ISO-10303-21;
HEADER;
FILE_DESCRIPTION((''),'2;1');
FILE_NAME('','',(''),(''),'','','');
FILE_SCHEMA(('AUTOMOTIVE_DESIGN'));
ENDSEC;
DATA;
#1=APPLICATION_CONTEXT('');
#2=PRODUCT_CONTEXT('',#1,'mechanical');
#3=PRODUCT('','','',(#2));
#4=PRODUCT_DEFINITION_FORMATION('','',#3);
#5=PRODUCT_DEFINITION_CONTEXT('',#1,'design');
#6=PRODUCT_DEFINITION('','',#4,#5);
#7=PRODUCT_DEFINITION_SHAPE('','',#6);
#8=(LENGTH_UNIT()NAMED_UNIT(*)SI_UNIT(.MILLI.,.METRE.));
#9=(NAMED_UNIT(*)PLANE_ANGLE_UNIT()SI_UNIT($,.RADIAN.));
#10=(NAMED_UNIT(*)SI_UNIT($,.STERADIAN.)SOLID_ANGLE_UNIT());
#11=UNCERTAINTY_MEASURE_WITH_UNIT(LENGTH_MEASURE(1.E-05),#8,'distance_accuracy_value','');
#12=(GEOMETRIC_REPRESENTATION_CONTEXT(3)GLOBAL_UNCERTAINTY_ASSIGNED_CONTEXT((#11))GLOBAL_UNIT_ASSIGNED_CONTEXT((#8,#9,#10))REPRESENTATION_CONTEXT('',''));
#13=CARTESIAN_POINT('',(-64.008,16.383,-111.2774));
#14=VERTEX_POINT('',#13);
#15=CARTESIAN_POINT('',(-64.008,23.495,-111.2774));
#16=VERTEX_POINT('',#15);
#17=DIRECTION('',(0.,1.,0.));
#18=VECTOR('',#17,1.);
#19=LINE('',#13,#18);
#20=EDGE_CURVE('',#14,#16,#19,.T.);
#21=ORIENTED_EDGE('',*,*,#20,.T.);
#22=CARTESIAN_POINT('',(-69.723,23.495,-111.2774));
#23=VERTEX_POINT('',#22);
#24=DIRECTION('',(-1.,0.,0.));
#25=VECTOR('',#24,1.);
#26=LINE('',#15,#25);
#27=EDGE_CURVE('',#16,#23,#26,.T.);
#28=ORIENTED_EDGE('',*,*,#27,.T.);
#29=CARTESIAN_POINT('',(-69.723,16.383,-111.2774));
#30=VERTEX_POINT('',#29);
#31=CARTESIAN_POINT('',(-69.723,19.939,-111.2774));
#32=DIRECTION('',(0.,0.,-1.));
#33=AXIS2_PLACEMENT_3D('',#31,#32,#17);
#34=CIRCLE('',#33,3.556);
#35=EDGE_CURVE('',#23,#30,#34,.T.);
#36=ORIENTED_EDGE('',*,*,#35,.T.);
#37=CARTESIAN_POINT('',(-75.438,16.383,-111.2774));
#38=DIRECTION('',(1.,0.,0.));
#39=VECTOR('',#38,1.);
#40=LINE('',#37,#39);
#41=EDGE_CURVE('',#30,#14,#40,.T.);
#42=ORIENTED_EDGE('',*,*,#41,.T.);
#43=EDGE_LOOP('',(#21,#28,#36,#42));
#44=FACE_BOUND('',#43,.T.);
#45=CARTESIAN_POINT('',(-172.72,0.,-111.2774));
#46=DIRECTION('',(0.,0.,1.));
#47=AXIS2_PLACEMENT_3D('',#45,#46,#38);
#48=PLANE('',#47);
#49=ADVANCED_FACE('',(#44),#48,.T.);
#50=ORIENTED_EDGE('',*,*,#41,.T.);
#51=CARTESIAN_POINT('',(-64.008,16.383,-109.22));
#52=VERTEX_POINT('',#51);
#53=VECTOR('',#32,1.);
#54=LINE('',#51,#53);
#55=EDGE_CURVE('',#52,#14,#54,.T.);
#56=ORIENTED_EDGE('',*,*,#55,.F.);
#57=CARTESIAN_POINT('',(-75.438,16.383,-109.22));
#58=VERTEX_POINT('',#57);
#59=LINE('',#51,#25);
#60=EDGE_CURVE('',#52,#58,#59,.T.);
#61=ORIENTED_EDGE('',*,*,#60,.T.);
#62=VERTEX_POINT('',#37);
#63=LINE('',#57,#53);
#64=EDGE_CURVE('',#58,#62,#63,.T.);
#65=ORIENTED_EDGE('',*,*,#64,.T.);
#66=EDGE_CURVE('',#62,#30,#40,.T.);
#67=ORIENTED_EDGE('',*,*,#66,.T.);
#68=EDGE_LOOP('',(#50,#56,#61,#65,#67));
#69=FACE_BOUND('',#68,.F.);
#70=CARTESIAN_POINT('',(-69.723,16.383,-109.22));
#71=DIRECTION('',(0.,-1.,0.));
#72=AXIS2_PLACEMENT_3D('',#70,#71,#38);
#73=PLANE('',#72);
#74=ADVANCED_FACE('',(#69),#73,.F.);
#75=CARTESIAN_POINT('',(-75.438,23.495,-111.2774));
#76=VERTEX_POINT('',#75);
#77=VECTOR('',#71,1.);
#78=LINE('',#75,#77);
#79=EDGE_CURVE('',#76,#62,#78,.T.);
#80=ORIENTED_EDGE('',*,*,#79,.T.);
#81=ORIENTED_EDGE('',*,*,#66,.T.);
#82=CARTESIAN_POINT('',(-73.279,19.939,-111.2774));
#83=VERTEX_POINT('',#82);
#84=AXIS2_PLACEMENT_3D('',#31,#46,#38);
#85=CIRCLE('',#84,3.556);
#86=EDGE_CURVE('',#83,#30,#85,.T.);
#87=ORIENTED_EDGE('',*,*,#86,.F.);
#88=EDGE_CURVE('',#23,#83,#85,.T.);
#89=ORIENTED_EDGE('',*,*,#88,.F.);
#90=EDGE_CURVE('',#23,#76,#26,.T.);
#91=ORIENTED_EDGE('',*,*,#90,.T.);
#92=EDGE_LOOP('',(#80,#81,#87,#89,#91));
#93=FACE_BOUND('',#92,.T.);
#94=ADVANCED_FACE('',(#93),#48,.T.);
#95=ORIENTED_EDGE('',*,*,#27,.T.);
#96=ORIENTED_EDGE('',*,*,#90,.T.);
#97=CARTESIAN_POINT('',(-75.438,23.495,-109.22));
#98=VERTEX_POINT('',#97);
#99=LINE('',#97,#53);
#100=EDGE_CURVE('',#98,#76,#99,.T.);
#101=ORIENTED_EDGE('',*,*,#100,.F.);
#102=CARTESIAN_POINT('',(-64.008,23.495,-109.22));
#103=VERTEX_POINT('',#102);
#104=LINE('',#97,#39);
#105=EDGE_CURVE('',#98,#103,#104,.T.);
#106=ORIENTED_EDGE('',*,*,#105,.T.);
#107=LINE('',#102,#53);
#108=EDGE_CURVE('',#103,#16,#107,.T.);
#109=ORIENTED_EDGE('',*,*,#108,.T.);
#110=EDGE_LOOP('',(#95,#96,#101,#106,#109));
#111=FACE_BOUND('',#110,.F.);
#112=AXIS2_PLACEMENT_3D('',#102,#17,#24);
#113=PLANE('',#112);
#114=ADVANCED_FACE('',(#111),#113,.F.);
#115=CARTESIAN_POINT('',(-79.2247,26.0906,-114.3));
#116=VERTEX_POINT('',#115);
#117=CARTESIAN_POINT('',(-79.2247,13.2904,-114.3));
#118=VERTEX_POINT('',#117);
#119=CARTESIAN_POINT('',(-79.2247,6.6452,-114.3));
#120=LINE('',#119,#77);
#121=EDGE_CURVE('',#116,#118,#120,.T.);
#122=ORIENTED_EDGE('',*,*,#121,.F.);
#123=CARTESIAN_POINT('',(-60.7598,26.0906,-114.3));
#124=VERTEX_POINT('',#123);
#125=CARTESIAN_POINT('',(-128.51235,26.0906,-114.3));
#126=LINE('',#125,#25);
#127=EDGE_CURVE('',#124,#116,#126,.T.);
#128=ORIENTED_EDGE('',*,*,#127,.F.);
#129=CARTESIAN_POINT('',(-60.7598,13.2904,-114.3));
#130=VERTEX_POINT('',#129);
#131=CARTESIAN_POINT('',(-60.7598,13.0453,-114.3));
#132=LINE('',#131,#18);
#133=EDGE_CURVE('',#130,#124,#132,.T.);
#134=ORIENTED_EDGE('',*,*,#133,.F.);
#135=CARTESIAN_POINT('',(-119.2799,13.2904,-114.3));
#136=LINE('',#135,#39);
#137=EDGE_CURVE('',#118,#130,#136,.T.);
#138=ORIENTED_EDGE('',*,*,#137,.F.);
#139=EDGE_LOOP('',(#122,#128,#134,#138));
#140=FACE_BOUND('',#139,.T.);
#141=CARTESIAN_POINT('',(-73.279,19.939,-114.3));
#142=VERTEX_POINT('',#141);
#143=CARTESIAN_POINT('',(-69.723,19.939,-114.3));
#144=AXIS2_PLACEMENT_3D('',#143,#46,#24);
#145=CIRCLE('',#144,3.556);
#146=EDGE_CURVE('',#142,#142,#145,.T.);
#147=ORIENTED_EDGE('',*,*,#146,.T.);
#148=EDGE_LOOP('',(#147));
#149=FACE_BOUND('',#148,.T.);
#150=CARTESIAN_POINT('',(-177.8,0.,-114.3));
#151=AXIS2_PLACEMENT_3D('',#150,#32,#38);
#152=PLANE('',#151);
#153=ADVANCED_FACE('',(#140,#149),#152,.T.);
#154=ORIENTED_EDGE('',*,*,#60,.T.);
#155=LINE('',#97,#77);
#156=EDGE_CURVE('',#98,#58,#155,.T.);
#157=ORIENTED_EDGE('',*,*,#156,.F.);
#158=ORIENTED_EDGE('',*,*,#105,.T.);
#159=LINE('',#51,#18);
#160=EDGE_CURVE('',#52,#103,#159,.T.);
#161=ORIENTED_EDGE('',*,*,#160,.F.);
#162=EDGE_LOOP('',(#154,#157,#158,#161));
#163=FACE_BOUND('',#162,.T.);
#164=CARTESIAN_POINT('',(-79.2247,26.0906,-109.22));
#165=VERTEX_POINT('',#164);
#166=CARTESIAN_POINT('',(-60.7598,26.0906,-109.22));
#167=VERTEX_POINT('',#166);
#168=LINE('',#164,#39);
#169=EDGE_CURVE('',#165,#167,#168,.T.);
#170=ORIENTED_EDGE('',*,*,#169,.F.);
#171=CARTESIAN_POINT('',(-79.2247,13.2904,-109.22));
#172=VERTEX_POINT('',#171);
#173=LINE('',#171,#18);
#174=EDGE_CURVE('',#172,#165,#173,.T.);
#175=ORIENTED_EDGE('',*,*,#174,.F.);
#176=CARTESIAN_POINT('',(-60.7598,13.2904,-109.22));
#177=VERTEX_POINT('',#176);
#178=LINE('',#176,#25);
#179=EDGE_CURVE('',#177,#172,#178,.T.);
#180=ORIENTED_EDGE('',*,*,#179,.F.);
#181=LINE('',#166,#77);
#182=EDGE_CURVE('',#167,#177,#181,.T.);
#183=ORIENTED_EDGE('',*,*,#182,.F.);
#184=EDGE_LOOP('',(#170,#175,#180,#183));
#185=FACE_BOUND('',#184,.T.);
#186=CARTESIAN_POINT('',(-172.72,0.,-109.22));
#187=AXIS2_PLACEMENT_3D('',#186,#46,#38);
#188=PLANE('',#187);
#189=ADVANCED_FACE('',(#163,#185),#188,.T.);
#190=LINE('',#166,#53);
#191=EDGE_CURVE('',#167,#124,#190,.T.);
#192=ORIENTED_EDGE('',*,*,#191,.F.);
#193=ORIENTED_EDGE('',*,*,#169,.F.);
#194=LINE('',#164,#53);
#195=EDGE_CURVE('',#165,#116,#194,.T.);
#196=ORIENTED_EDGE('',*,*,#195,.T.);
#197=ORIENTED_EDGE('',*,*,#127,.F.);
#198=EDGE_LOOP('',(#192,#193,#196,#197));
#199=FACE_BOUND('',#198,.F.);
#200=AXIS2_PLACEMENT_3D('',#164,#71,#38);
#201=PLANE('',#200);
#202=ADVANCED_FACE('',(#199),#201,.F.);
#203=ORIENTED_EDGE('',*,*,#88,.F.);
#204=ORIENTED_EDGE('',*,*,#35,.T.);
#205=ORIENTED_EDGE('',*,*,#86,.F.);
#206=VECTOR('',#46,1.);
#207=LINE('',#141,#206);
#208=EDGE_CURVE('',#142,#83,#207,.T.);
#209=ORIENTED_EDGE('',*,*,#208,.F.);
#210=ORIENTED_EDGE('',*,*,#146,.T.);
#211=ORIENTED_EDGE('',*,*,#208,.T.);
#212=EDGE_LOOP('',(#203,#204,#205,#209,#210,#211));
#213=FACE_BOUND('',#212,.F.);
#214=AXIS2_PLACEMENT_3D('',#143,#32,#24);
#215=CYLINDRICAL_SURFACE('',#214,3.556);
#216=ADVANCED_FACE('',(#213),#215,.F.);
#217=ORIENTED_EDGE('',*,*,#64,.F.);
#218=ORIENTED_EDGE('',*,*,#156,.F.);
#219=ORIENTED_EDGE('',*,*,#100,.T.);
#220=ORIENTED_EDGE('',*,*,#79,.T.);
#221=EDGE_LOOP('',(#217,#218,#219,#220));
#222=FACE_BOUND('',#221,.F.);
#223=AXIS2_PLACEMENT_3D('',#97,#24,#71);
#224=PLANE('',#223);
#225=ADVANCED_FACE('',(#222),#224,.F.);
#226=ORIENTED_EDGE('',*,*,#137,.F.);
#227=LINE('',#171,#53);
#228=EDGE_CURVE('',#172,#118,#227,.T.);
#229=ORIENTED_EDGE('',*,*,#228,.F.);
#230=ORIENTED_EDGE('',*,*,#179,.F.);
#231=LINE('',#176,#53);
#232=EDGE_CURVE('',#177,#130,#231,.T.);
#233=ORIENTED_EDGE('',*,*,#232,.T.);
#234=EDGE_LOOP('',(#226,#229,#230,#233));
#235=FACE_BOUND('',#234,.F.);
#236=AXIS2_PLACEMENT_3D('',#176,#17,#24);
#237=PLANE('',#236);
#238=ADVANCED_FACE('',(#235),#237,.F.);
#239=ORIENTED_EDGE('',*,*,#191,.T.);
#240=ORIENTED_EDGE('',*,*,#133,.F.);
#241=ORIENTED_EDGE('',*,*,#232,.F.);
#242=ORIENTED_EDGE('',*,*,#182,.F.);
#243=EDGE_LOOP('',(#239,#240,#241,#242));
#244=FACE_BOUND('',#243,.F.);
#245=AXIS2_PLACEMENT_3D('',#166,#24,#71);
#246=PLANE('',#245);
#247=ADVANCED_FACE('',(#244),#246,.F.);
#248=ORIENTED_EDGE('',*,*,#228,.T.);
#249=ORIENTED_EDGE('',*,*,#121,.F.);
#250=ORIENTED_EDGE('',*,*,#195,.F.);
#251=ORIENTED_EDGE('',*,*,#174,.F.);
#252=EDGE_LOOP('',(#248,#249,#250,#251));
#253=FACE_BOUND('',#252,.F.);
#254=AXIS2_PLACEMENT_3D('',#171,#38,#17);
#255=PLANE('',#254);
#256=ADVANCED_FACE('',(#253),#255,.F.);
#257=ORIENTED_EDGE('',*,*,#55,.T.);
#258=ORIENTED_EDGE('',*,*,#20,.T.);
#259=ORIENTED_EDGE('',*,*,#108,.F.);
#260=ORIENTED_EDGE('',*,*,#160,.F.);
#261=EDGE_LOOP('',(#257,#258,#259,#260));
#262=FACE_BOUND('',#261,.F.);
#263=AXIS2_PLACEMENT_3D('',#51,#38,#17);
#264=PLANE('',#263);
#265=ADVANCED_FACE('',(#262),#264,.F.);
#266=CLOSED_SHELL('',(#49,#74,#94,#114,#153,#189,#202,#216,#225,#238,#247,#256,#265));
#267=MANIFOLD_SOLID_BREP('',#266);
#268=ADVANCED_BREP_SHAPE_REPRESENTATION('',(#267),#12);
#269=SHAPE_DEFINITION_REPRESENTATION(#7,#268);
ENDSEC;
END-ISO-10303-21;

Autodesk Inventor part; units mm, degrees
ref_plane "YZ Plane" through (0, 0, 0) normal (1, 0, 0) x (0, 1, 0)
ref_plane "XZ Plane" through (0, 0, 0) normal (0, 1, 0) x (-1, 0, 0)
ref_plane "XY Plane" through (0, 0, 0) normal (0, 0, 1) x (1, 0, 0)
sketch "Sketch1" plane through (0, 0, 0) normal (0, 1, 0) x (-1, 0, 0)
  line L0 (0, 0) -> (177.8, 0)
  line L1 (177.8, 0) -> (177.8, -114.3)
  line L2 (177.8, -114.3) -> (0, -114.3)
  line L3 (0, -114.3) -> (0, 0)
  dimension "d0" = 177.8
  dimension "d1" = 114.3
extrude "Extrusion1" add sketch "Sketch1" along normal blind 38.1
sketch "Sketch2" plane through (0, 0, 0) normal (0, -1, 0) x (1, 0, 0)
  line L0 (-177.8, -114.3) -> (-177.8, 0) projected
  line L1 (0, 0) -> (-177.8, 0)
  line L2 (-177.8, 0) -> (-177.8, -114.3)
  line L3 (-177.8, -114.3) -> (0, -114.3)
  line L4 (0, -114.3) -> (0, 0)
  line L5 (-5.08, -5.08) -> (-172.72, -5.08)
  line L6 (-172.72, -5.08) -> (-172.72, -109.22)
  line L7 (-172.72, -109.22) -> (-5.08, -109.22)
  line L8 (-5.08, -109.22) -> (-5.08, -5.08)
  dimension "d4" = 5.08
extrude "Extrusion2" cut sketch "Sketch2" against normal blind 35.56 contours L8 L7 L6 L5
fillet "Fillet1" radius 3.175 4 edges at (-177.8, 38.1, -57.15) (-88.9, 38.1, 0) (-88.9, 38.1, -114.3) (0, 38.1, -57.15)
sketch "Sketch3" plane through (0, 38.1, 0) normal (0, 1, 0) x (1, 0, 0)
  line L0 (-177.8, 114.3) -> (-171.45, 114.3)
  line L1 (-171.45, 114.3) -> (-171.45, 0)
  line L2 (-171.45, 0) -> (-177.8, 0)
  line L3 (-177.8, 0) -> (-177.8, 114.3)
  line L4 (0, 114.3) -> (-177.8, 114.3) projected
  line L5 (-177.8, 114.3) -> (0, 114.3)
  line L6 (0, 114.3) -> (0, 107.95)
  line L7 (0, 107.95) -> (-177.8, 107.95)
  line L8 (-177.8, 107.95) -> (-177.8, 114.3)
  line L9 (-158.75, 100.4887) -> (-100.6475, 100.4887)
  line L10 (-100.6475, 100.4887) -> (-100.6475, 13.8112)
  line L11 (-100.6475, 13.8112) -> (-158.75, 13.8112)
  line L12 (-158.75, 13.8112) -> (-158.75, 100.4887)
  point P0 (0, 0)
  dimension "d8" = 6.35
  dimension "d9" = 6.35
  dimension "d10" = 58.1025
  dimension "d11" = 86.6775
  dimension "d12" = 13.8112
  dimension "d13" = 19.05
extrude "Extrusion3" cut sketch "Sketch3" against normal blind 35.56 contours L9 L10 L11 L12
sketch "Sketch4" plane through (0, 38.1, 0) normal (0, 1, 0) x (1, 0, 0)
  line L0 (-94.2975, 17.78) -> (-81.2088, 17.78)
  line L1 (-91.7575, 20.32) -> (-91.7575, 26.67)
  line L2 (-91.7575, 26.67) -> (-94.2975, 26.67)
  line L3 (-94.2975, 26.67) -> (-94.2975, 17.78)
  line L4 (-94.2975, 17.78) -> (-78.6765, 17.78)
  line L5 (-78.6765, 17.78) -> (-78.6765, 20.32)
  line L6 (-94.2975, 24.2647) -> (-94.2975, 17.78)
  line L7 (-85.6615, 20.32) -> (-85.6615, 24.13)
  line L8 (-85.6615, 24.13) -> (-88.2015, 24.13)
  line L9 (-88.2015, 24.13) -> (-88.2015, 20.32)
  line L10 (-78.6765, 20.32) -> (-85.6615, 20.32)
  line L11 (-88.2015, 20.32) -> (-91.7575, 20.32)
  line L12 (-100.6475, 100.4887) -> (-100.6475, 13.8112) projected
  line L13 (-177.8, 0) -> (0, 0) projected
  line L14 (-94.2975, 27.94) -> (-78.6765, 27.94)
  line L15 (-78.6765, 27.94) -> (-78.6765, 30.7699)
  line L16 (-81.2165, 30.48) -> (-94.2975, 30.48)
  line L17 (-94.2975, 30.48) -> (-94.2975, 27.94)
  line L18 (-83.0828, 27.94) -> (-78.6765, 27.94)
  line L19 (-78.6765, 27.94) -> (-78.6765, 36.83)
  line L20 (-78.6765, 36.83) -> (-81.2165, 36.83)
  line L21 (-81.2165, 36.83) -> (-81.2165, 30.48)
  ellipse E0 centre (-86.487, 41.91) end of major axis (-94.2975, 41.91) minor radius 5.334
  ellipse E1 centre (-86.487, 53.34) end of major axis (-94.2975, 53.34) minor radius 5.334
  line L22 (-94.2975, 60.96) -> (-78.6765, 60.96)
  line L23 (-78.6765, 60.96) -> (-78.6765, 63.754)
  line L24 (-94.2975, 63.754) -> (-94.2975, 60.96)
  ellipse E2 centre (-86.487, 63.754) end of major axis (-94.2975, 63.754) minor radius 7.62 (-78.6765, 63.754) -> (-94.2975, 63.754) ccw
  line L25 (-91.7575, 63.754) -> (-91.7575, 63.5)
  line L26 (-91.7575, 63.5) -> (-81.2165, 63.5)
  line L27 (-81.2165, 63.5) -> (-81.2165, 63.754)
  line L28 (-94.2975, 82.55) -> (-78.6765, 82.55)
  line L29 (-78.6765, 82.55) -> (-78.6765, 80.01)
  line L30 (-78.6765, 80.01) -> (-94.2975, 80.01)
  line L31 (-94.2975, 80.01) -> (-94.2975, 82.55)
  line L32 (-91.7575, 89.535) -> (-78.6765, 89.535)
  line L33 (-78.6765, 89.535) -> (-78.6765, 92.075)
  line L34 (-78.6765, 92.075) -> (-91.7575, 92.075)
  line L35 (-94.2975, 94.8241) -> (-94.2975, 91.9305)
  line L36 (-94.2975, 85.09) -> (-91.7575, 85.09)
  line L37 (-91.7575, 96.52) -> (-94.2975, 96.52)
  line L38 (-94.2975, 96.52) -> (-94.2975, 85.09)
  line L39 (-91.7575, 85.09) -> (-91.7575, 89.535)
  line L40 (-91.7575, 92.075) -> (-91.7575, 96.52)
  spline S0 degree 5 poles (-91.7575, 41.91) (-91.7584, 41.6813) (-91.6944, 41.4527) (-91.5885, 41.2473) (-91.2042, 40.6846) (-90.6636, 40.2564) (-90.282, 40.0177) (-89.3306, 39.5478) (-88.3046, 39.2718) (-87.7026, 39.1679) (-86.487, 39.0641) (-85.2714, 39.1679) (-84.6694, 39.2718) (-83.6435, 39.5478) (-82.692, 40.0176) (-82.3107, 40.2563) (-81.7696, 40.6845) (-81.3858, 41.2473) (-81.2787, 41.4526) (-81.1539, 41.91) (-81.2787, 42.3674) (-81.3858, 42.5727) (-81.7696, 43.1355) (-82.3107, 43.5637) (-82.692, 43.8024) (-83.6435, 44.2722) (-84.6694, 44.5482) (-85.2714, 44.6521) (-86.487, 44.7559) (-87.7026, 44.6521) (-88.3046, 44.5482) (-89.3306, 44.2722) (-90.282, 43.8023) (-90.6636, 43.5636) (-91.2042, 43.1354) (-91.5885, 42.5727) (-91.6944, 42.3673) (-91.7584, 42.1387) (-91.7575, 41.91) knots 0 0 0 0 0 0 0.044471 0.044471 0.044471 0.131758 0.131758 0.131758 0.25 0.25 0.25 0.36824 0.36824 0.36824 0.455522 0.455522 0.455522 0.5 0.5 0.5 0.544478 0.544478 0.544478 0.63176 0.63176 0.63176 0.75 0.75 0.75 0.868242 0.868242 0.868242 0.955529 0.955529 0.955529 1 1 1 1 1 1
  spline S1 degree 5 poles (-91.7575, 53.34) (-91.7584, 53.1113) (-91.6944, 52.8827) (-91.5885, 52.6773) (-91.2042, 52.1146) (-90.6636, 51.6864) (-90.282, 51.4477) (-89.3306, 50.9778) (-88.3046, 50.7018) (-87.7026, 50.5979) (-86.487, 50.4941) (-85.2714, 50.5979) (-84.6694, 50.7018) (-83.6435, 50.9778) (-82.692, 51.4476) (-82.3107, 51.6863) (-81.7696, 52.1145) (-81.3858, 52.6773) (-81.2787, 52.8826) (-81.1539, 53.34) (-81.2787, 53.7974) (-81.3858, 54.0027) (-81.7696, 54.5655) (-82.3107, 54.9937) (-82.692, 55.2324) (-83.6435, 55.7022) (-84.6694, 55.9782) (-85.2714, 56.0821) (-86.487, 56.1859) (-87.7026, 56.0821) (-88.3046, 55.9782) (-89.3306, 55.7022) (-90.282, 55.2323) (-90.6636, 54.9936) (-91.2042, 54.5654) (-91.5885, 54.0027) (-91.6944, 53.7973) (-91.7584, 53.5687) (-91.7575, 53.34) knots 0 0 0 0 0 0 0.044471 0.044471 0.044471 0.131758 0.131758 0.131758 0.25 0.25 0.25 0.36824 0.36824 0.36824 0.455522 0.455522 0.455522 0.5 0.5 0.5 0.544478 0.544478 0.544478 0.63176 0.63176 0.63176 0.75 0.75 0.75 0.868242 0.868242 0.868242 0.955529 0.955529 0.955529 1 1 1 1 1 1
  spline S2 degree 5 poles (-81.2165, 63.754) (-81.2166, 64.309) (-81.2953, 64.8639) (-81.4525, 65.404) (-82.1282, 66.8995) (-83.3585, 68.0474) (-84.3453, 68.5716) (-86.487, 69.0964) (-88.6287, 68.5716) (-89.6155, 68.0474) (-90.8458, 66.8995) (-91.5215, 65.404) (-91.6787, 64.8639) (-91.7574, 64.309) (-91.7575, 63.754) knots 0 0 0 0 0 0 0.170659 0.170659 0.170659 0.5 0.5 0.5 0.829341 0.829341 0.829341 1 1 1 1 1 1
  point P0 (-94.2975, 93.3773)
  point P1 (-88.9, 0)
  point P2 (-93.0275, 85.09)
  dimension "d32" = 5.334
  dimension "d33" = 7.8105
  dimension "d36" = 7.8105
  dimension "d37" = 5.334
  dimension "d42" = 7.62
  dimension "d43" = 2.54
  dimension "d16" = 2.54
  dimension "d17" = 3.556
  dimension "d18" = 2.54
  dimension "d19" = 6.985
  dimension "d20" = 8.89
  dimension "d21" = 6.35
  dimension "d22" = 3.81
  dimension "d23" = 3.81
  dimension "d24" = 6.35
  dimension "d25" = 17.78
  dimension "d26" = 2.54
  dimension "d27" = 2.54
  dimension "d28" = 6.35
  dimension "d29" = 15.621
  dimension "d30" = 6.35
  dimension "d31" = 27.94
  dimension "d34" = 14.1605
  dimension "d35" = 41.91
  dimension "d38" = 14.1605
  dimension "d39" = 53.34
  dimension "d40" = 2.54
  dimension "d41" = 2.54
  dimension "d44" = 6.35
  dimension "d45" = 15.621
  dimension "d46" = 60.96
  dimension "d47" = 2.794
  dimension "d48" = 63.754
  dimension "d49" = 14.1605
  dimension "d50" = 2.54
  dimension "d51" = 15.621
  dimension "d52" = 4.445
  dimension "d53" = 4.445
  dimension "d54" = 2.54
  dimension "d55" = 2.54
  dimension "d56" = 6.35
  dimension "d57" = 80.01
  dimension "d58" = 2.54
  dimension "d59" = 13.081
  dimension "d62" = 3.9688
  dimension "d63" = 3.9688
extrude "Extrusion4" cut sketch "Sketch4" against normal blind 1.27
sketch "Sketch5" plane through (0, 38.1, 0) normal (0, 1, 0) x (1, 0, 0)
  line L0 (-43.4975, 22.6219) -> (-37.9413, 22.6219)
  line L1 (-37.9413, 22.6219) -> (-37.9413, 28.1781)
  line L2 (-37.9413, 28.1781) -> (-43.4975, 28.1781)
  line L3 (-43.4975, 28.1781) -> (-43.4975, 22.6219)
  line L4 (-43.4975, 38.4969) -> (-37.9413, 38.4969)
  line L5 (-37.9413, 38.4969) -> (-37.9413, 44.0531)
  line L6 (-37.9413, 44.0531) -> (-43.4975, 44.0531)
  line L7 (-43.4975, 44.0531) -> (-43.4975, 38.4969)
  line L8 (-43.4975, 54.3719) -> (-37.9413, 54.3719)
  line L9 (-37.9413, 54.3719) -> (-37.9413, 59.9281)
  line L10 (-37.9413, 59.9281) -> (-43.4975, 59.9281)
  line L11 (-43.4975, 59.9281) -> (-43.4975, 54.3719)
  line L12 (-43.4975, 70.2469) -> (-37.9413, 70.2469)
  line L13 (-37.9413, 70.2469) -> (-37.9413, 75.8031)
  line L14 (-37.9413, 75.8031) -> (-43.4975, 75.8031)
  line L15 (-43.4975, 75.8031) -> (-43.4975, 70.2469)
  line L16 (-43.4975, 86.1219) -> (-37.9413, 86.1219)
  line L17 (-37.9413, 86.1219) -> (-37.9413, 91.6781)
  line L18 (-37.9413, 91.6781) -> (-43.4975, 91.6781)
  line L19 (-43.4975, 91.6781) -> (-43.4975, 86.1219)
  line L20 (0, 114.3) -> (-177.8, 114.3) projected
  line L21 (-177.8, 0) -> (0, 0) projected
  line L22 (-100.6475, 100.4887) -> (-100.6475, 13.8112) projected
  circle A0 centre (-21.9075, 25.4) radius 3.81
  circle A1 centre (-21.9075, 41.275) radius 3.81
  circle A2 centre (-21.9075, 57.15) radius 3.81
  circle A3 centre (-21.9075, 73.025) radius 3.81
  circle A4 centre (-21.9075, 88.9) radius 3.81
  point P0 (-43.4975, 73.025)
  dimension "d64" = 5.5563
  dimension "d65" = 5.5563
  dimension "d66" = 5.5563
  dimension "d67" = 5.5563
  dimension "d68" = 5.5563
  dimension "d69" = 5.5563
  dimension "d70" = 15.875
  dimension "d71" = 15.875
  dimension "d72" = 15.875
  dimension "d73" = 15.875
  dimension "d74" = 22.6219
  dimension "d76" = 57.15
  dimension "d77" = 7.62
  dimension "d78" = 7.62
  dimension "d79" = 7.62
  dimension "d80" = 7.62
  dimension "d81" = 7.62
  dimension "d82" = 15.875
  dimension "d83" = 15.875
  dimension "d84" = 15.875
  dimension "d85" = 15.875
  dimension "d86" = 25.4
  dimension "d87" = 78.74
  dimension "d88" = 78.74
  dimension "d89" = 78.74
  dimension "d90" = 78.74
  dimension "d91" = 78.74
extrude "Extrusion5" cut sketch "Sketch5" against normal blind 25.4
sketch "Sketch6" plane through (0, 35.56, 0) normal (0, -1, 0) x (1, 0, 0)
  circle A0 centre (-21.9075, -88.9) radius 3.81 projected
  circle A1 centre (-21.9075, -88.9) radius 5.08
  circle A2 centre (-21.9075, -73.025) radius 3.81 projected
  circle A3 centre (-21.9075, -73.025) radius 5.08
  circle A4 centre (-21.9075, -57.15) radius 3.81 projected
  circle A5 centre (-21.9075, -57.15) radius 5.08
  circle A6 centre (-21.9075, -41.275) radius 3.81 projected
  circle A7 centre (-21.9075, -41.275) radius 5.08
  circle A8 centre (-21.9075, -25.4) radius 3.81 projected
  circle A9 centre (-21.9075, -25.4) radius 5.08
  line L0 (-43.4975, -59.9281) -> (-37.9413, -59.9281)
  line L1 (-37.9413, -59.9281) -> (-37.9413, -54.3719)
  line L2 (-37.9413, -54.3719) -> (-43.4975, -54.3719)
  line L3 (-43.4975, -54.3719) -> (-43.4975, -59.9281)
  line L4 (-45.4025, -61.8331) -> (-36.0363, -61.8331)
  line L5 (-36.0363, -61.8331) -> (-36.0363, -52.4669)
  line L6 (-36.0363, -52.4669) -> (-45.4025, -52.4669)
  line L7 (-45.4025, -52.4669) -> (-45.4025, -61.8331)
  line L8 (-43.4975, -91.6781) -> (-37.9413, -91.6781)
  line L9 (-37.9413, -91.6781) -> (-37.9413, -86.1219)
  line L10 (-37.9413, -86.1219) -> (-43.4975, -86.1219)
  line L11 (-43.4975, -86.1219) -> (-43.4975, -91.6781)
  line L12 (-43.4975, -75.8031) -> (-37.9413, -75.8031) projected
  line L13 (-37.9413, -70.2469) -> (-36.6713, -68.9769) projected
  line L14 (-43.4975, -75.8031) -> (-37.9413, -75.8031)
  line L15 (-37.9413, -75.8031) -> (-37.9413, -70.2469)
  line L16 (-37.9413, -70.2469) -> (-43.4975, -70.2469)
  line L17 (-43.4975, -70.2469) -> (-43.4975, -75.8031)
  line L18 (-43.4975, -38.4969) -> (-43.4975, -44.0531) projected
  line L19 (-43.4975, -44.0531) -> (-37.9413, -44.0531)
  line L20 (-37.9413, -44.0531) -> (-37.9413, -38.4969)
  line L21 (-37.9413, -38.4969) -> (-43.4975, -38.4969)
  line L22 (-43.4975, -38.4969) -> (-43.4975, -44.0531)
  line L23 (-37.9413, -28.1781) -> (-43.4975, -28.1781) projected
  line L24 (-37.9413, -22.6219) -> (-36.6713, -21.3519) projected
  line L25 (-43.4975, -28.1781) -> (-37.9413, -28.1781)
  line L26 (-37.9413, -28.1781) -> (-37.9413, -22.6219)
  line L27 (-37.9413, -22.6219) -> (-43.4975, -22.6219)
  line L28 (-43.4975, -22.6219) -> (-43.4975, -28.1781)
  line L29 (-45.4025, -77.7081) -> (-36.0363, -77.7081)
  line L30 (-36.0363, -77.7081) -> (-36.0363, -68.3419)
  line L31 (-36.0363, -68.3419) -> (-45.4025, -68.3419)
  line L32 (-45.4025, -68.3419) -> (-45.4025, -77.7081)
  line L33 (-45.4025, -84.2169) -> (-36.0362, -84.2169)
  line L34 (-36.0362, -84.2169) -> (-36.0362, -93.5831)
  line L35 (-36.0362, -93.5831) -> (-45.4025, -93.5831)
  line L36 (-45.4025, -93.5831) -> (-45.4025, -84.2169)
  line L37 (-36.0362, -45.9581) -> (-45.4025, -45.9581)
  line L38 (-45.4025, -45.9581) -> (-45.4025, -36.5919)
  line L39 (-45.4025, -36.5919) -> (-36.0362, -36.5919)
  line L40 (-36.0362, -36.5919) -> (-36.0362, -45.9581)
  line L41 (-45.4025, -30.0831) -> (-36.0363, -30.0831)
  line L42 (-36.0363, -30.0831) -> (-36.0363, -20.7169)
  line L43 (-36.0363, -20.7169) -> (-45.4025, -20.7169)
  line L44 (-45.4025, -20.7169) -> (-45.4025, -30.0831)
  line L45 (-48.3394, -99.6918) -> (-33.0994, -99.6918)
  line L46 (-33.0994, -99.6918) -> (-33.0994, -14.6018)
  line L47 (-33.0994, -14.6018) -> (-48.3394, -14.6018)
  line L48 (-48.3394, -14.6018) -> (-48.3394, -99.6918)
  point P0 (0, 0)
  point P1 (-43.4975, -38.4969)
  point P2 (-40.7194, -44.0531)
  point P3 (-40.7194, -91.6781)
  point P4 (-40.7194, -14.6018)
  dimension "d97" = 10.16
  dimension "d98" = 10.16
  dimension "d99" = 10.16
  dimension "d100" = 10.16
  dimension "d101" = 10.16
  dimension "d119" = 1.905
  dimension "d120" = 1.905
  dimension "d121" = 1.905
  dimension "d122" = 1.905
  dimension "d123" = 1.905
  dimension "d136" = 15.24
  dimension "d137" = 85.09
  dimension "d139" = 7.62
  dimension "d140" = 8.0137
  dimension "d141" = 8.02
extrude "Extrusion6" cut sketch "Sketch6" against normal blind 1.27 contours A1 | A3 | A5 | A7 | A9
extrude "Extrusion9" cut sketch "Sketch6" against normal blind 1.7463 contours L7 L6 L5 L4 | L32 L31 L30 L29 | L33 L34 L35 L36 | L37 L38 L39 L40 | L44 L43 L42 L41
sketch "Sketch8" plane through (0, 35.56, 0) normal (0, -1, 0) x (1, 0, 0)
  line L0 (-100.6475, -13.8112) -> (-100.6475, -100.4887) projected
  line L1 (-100.6475, -13.8112) -> (-158.75, -13.8112)
  line L2 (-158.75, -13.8112) -> (-158.75, -7.4613)
  line L3 (-158.75, -7.4613) -> (-100.6475, -7.4612)
  line L4 (-100.6475, -7.4612) -> (-100.6475, -13.8112)
  line L5 (-158.75, -100.4887) -> (-100.6475, -100.4887) projected
  line L6 (-100.6475, -100.4887) -> (-158.75, -100.4887)
  line L7 (-158.75, -100.4887) -> (-158.75, -107.4737)
  line L8 (-158.75, -107.4737) -> (-100.6475, -107.4737)
  line L9 (-100.6475, -107.4737) -> (-100.6475, -100.4887)
  line L10 (-100.6475, -7.4612) -> (-94.2975, -7.4612)
  line L11 (-94.2975, -7.4612) -> (-94.2975, -13.8112)
  line L12 (-94.2975, -13.8112) -> (-100.6475, -13.8112)
  line L13 (-100.6475, -13.8112) -> (-100.6475, -7.4612)
  line L14 (-100.6475, -100.4887) -> (-94.2975, -100.4887)
  line L15 (-94.2975, -100.4887) -> (-94.2975, -107.4737)
  line L16 (-94.2975, -107.4737) -> (-100.6475, -107.4737)
  line L17 (-100.6475, -107.4737) -> (-100.6475, -100.4887)
  line L18 (-158.75, -100.4887) -> (-165.1, -100.4887)
  line L19 (-165.1, -100.4887) -> (-165.1, -107.4737)
  line L20 (-165.1, -107.4737) -> (-158.75, -107.4737)
  line L21 (-158.75, -107.4737) -> (-158.75, -100.4887)
  line L22 (-158.75, -7.4613) -> (-165.1, -7.4613)
  line L23 (-165.1, -7.4613) -> (-165.1, -13.8112)
  line L24 (-165.1, -13.8112) -> (-158.75, -13.8112)
  line L25 (-158.75, -13.8112) -> (-158.75, -7.4613)
  line L26 (-102.4053, -9.0487) -> (-155.7453, -9.0487)
  line L27 (-155.7453, -9.0487) -> (-155.7453, -12.2237)
  line L28 (-155.7453, -12.2237) -> (-102.4053, -12.2237)
  line L29 (-102.4053, -12.2237) -> (-102.4053, -9.0487)
  point P0 (0, 0)
  dimension "d126" = 6.35
  dimension "d127" = 6.985
  dimension "d128" = 6.35
  dimension "d129" = 6.35
  dimension "d130" = 6.35
  dimension "d131" = 53.34
  dimension "d132" = 3.175
  dimension "d133" = 1.5875
extrude "Extrusion10" cut sketch "Sketch8" against normal blind 1.27 contours L29 L28 L27 L26
extrude "Extrusion11" cut sketch "Sketch6" against normal blind 0.9525 contours L48 L47 L46 L45
sketch "Sketch9" plane through (-177.8, 0, 0) normal (0, 0, 1) x (1, 0, 0)
  line L0 (77.1525, 35.56) -> (19.05, 35.56) projected
  line L1 (172.72, 0) -> (5.08, 0) projected
  line L2 (77.1525, 35.56) -> (127.9525, 35.56)
  line L3 (127.9525, 35.56) -> (127.9525, 0)
  line L4 (127.9525, 0) -> (77.1525, 0)
  line L5 (77.1525, 0) -> (77.1525, 35.56)
  line L6 (86.0425, 17.145) -> (106.68, 17.145)
  line L7 (106.68, 17.145) -> (106.68, 15.0495)
  line L8 (106.68, 15.0495) -> (86.0425, 15.0495)
  line L9 (86.0425, 15.0495) -> (86.0425, 17.145)
  line L10 (88.5825, 15.0495) -> (97.4725, 15.0495)
  line L11 (97.4725, 15.0495) -> (97.4725, 11.2395)
  line L12 (97.4725, 11.2395) -> (88.5825, 11.2395)
  line L13 (88.5825, 11.2395) -> (88.5825, 15.0495)
  line L14 (0, 34.925) -> (177.8, 34.925) projected
  line L15 (0, 0) -> (0, 34.925) projected
  line L16 (177.8, 0) -> (177.8, 34.925) projected
  point P0 (97.4725, 15.0495)
  dimension "d144" = 50.8
  dimension "d145" = 20.6375
  dimension "d146" = 2.0955
  dimension "d147" = 8.89
  dimension "d148" = 3.81
  dimension "d149" = 2.54
  dimension "d150" = 17.78
  dimension "d187" = 71.12
extrude "Extrusion12" cut sketch "Sketch9" against normal blind 5.08 contours L6 L7 L8 L9 | L8 L11 L12 L13
sketch "Sketch10" plane through (-5.08, 0, -5.08) normal (0, 0, -1) x (-1, 0, 0)
  line L0 (84.1375, 11.2395) -> (75.2475, 11.2395) projected
  line L1 (84.1375, 15.0495) -> (86.6775, 15.0495) projected
  line L2 (75.2475, 11.2395) -> (84.1375, 11.2395)
  line L3 (84.1375, 11.2395) -> (84.1375, 15.0495)
  line L4 (75.2475, 15.0495) -> (75.2475, 11.2395)
  line L5 (75.2475, 15.0495) -> (66.04, 15.0495) projected
  line L6 (86.6775, 17.145) -> (86.6775, 15.0495) projected
  line L7 (86.6775, 15.0495) -> (86.6775, 17.145)
  line L8 (86.6775, 17.145) -> (66.04, 17.145)
  line L9 (66.04, 17.145) -> (66.04, 15.0495)
  line L10 (66.04, 15.0495) -> (75.2475, 15.0495)
  line L11 (84.1375, 15.0495) -> (86.6775, 15.0495)
  line L12 (73.3425, 9.3345) -> (86.0425, 9.3345)
  line L13 (86.0425, 9.3345) -> (86.0425, 13.1445)
  line L14 (86.0425, 13.1445) -> (88.5825, 13.1445)
  line L15 (88.5825, 13.1445) -> (88.5825, 19.05)
  line L16 (88.5825, 19.05) -> (64.135, 19.05)
  line L17 (64.135, 19.05) -> (64.135, 13.1445)
  line L18 (64.135, 13.1445) -> (73.3425, 13.1445)
  line L19 (73.3425, 13.1445) -> (73.3425, 9.3345)
  line L20 (73.3425, 13.1445) -> (73.3425, 15.0495)
  line L21 (86.0425, 13.1445) -> (86.0425, 15.0495)
  point P0 (-5.08, 0)
  dimension "d153" = 1.905
extrude "Extrusion13" cut sketch "Sketch10" against normal blind 3.175 contours L3 L1 L21 L13 L12 L19 L20 L5 L4 L0 | L1 L6 L8 L9 L5 L20 L18 L17 L16 L15 L14 L21
sketch "Sketch11" plane through (0, 0, -114.3) normal (0, 0, -1) x (-1, 0, 0)
  line L0 (63.5, 23.495) -> (75.946, 23.495)
  line L1 (75.946, 23.495) -> (75.946, 16.383)
  line L2 (75.946, 16.383) -> (63.5, 16.383)
  line L3 (63.5, 16.383) -> (63.5, 23.495)
  line L4 (0, 0) -> (0, 34.925) projected
  circle A0 centre (69.723, 19.939) radius 3.556
  line L5 (0, 34.925) -> (177.8, 34.925) projected
  point P0 (69.723, 23.495)
  dimension "d156" = 7.112
  dimension "d157" = 63.5
  dimension "d158" = 12.446
  dimension "d164" = 11.43
  dimension "d194" = 7.112
  dimension "d195" = 3.556
  dimension "d197" = 6.223
extrude "Extrusion14" cut sketch "Sketch11" against normal blind 6.35 contours A0
sketch "Sketch12" plane through (-172.72, 0, -109.22) normal (0, 0, 1) x (1, 0, 0)
  line L0 (97.282, 16.383) -> (108.712, 16.383)
  line L1 (108.712, 16.383) -> (108.712, 23.495)
  line L2 (108.712, 23.495) -> (97.282, 23.495)
  line L3 (97.282, 23.495) -> (97.282, 16.383)
  circle A0 centre (102.997, 19.939) radius 3.556 projected
  line L4 (97.282, 16.383) -> (108.712, 23.495) construction
  line L5 (108.712, 16.383) -> (97.282, 23.495) construction
  point P0 (172.72, 0)
  point P1 (102.997, 16.383)
  point P2 (102.997, 23.495)
  point P3 (102.997, 19.939)
  dimension "d161" = 11.43
  dimension "d196" = 3.556
extrude "Extrusion15" cut sketch "Sketch12" against normal blind 2.0574 contours L3 L2 A0 L0 | A0 L2 L1 L0
sketch "Sketch13" plane through (0, 35.56, 0) normal (0, -1, 0) x (1, 0, 0)
  line L0 (-48.3394, -99.6918) -> (-48.3394, -14.6018) projected
  line L1 (-48.3394, -31.1933) -> (-46.4344, -31.1933)
  line L2 (-46.4344, -31.1933) -> (-46.4344, -36.2733)
  line L3 (-46.4344, -36.2733) -> (-48.3394, -36.2733)
  line L4 (-48.3394, -36.2733) -> (-48.3394, -31.1933)
  line L5 (-33.0994, -14.6018) -> (-33.0994, -99.6918) projected
  line L6 (-33.0994, -36.2733) -> (-35.0044, -36.2733)
  line L7 (-35.0044, -36.2733) -> (-35.0044, -31.1933)
  line L8 (-35.0044, -31.1933) -> (-33.0994, -31.1933)
  line L9 (-33.0994, -31.1933) -> (-33.0994, -36.2733)
  line L10 (-46.4344, -31.1933) -> (-51.5144, -31.1933)
  line L11 (-51.5144, -31.1933) -> (-51.5144, -36.2733)
  line L12 (-51.5144, -36.2733) -> (-46.4344, -36.2733)
  line L13 (-46.4344, -36.2733) -> (-46.4344, -31.1933)
  line L14 (-35.0044, -31.1933) -> (-29.9244, -31.1933)
  line L15 (-29.9244, -31.1933) -> (-29.9244, -36.2733)
  line L16 (-29.9244, -36.2733) -> (-35.0044, -36.2733)
  line L17 (-35.0044, -36.2733) -> (-35.0044, -31.1933)
  line L18 (-48.3394, -78.5039) -> (-46.4344, -78.5039)
  line L19 (-46.4344, -78.5039) -> (-46.4344, -83.5839)
  line L20 (-46.4344, -83.5839) -> (-48.3394, -83.5839)
  line L21 (-48.3394, -83.5839) -> (-48.3394, -78.5039)
  line L22 (-33.0994, -78.5039) -> (-35.0044, -78.5039)
  line L23 (-35.0044, -78.5039) -> (-35.0044, -83.5839)
  line L24 (-35.0044, -83.5839) -> (-33.0994, -83.5839)
  line L25 (-33.0994, -83.5839) -> (-33.0994, -78.5039)
  line L26 (-46.4344, -78.5039) -> (-51.5144, -78.5039)
  line L27 (-51.5144, -78.5039) -> (-51.5144, -83.5839)
  line L28 (-51.5144, -83.5839) -> (-46.4344, -83.5839)
  line L29 (-46.4344, -83.5839) -> (-46.4344, -78.5039)
  line L30 (-35.0044, -78.5039) -> (-29.9244, -78.5039)
  line L31 (-29.9244, -78.5039) -> (-29.9244, -83.5839)
  line L32 (-29.9244, -83.5839) -> (-35.0044, -83.5839)
  line L33 (-35.0044, -83.5839) -> (-35.0044, -78.5039)
  point P0 (0, 0)
  dimension "d166" = 5.08
  dimension "d167" = 5.08
  dimension "d168" = 5.08
  dimension "d169" = 1.905
  dimension "d170" = 1.905
  dimension "d171" = 1.905
  dimension "d172" = 1.905
  dimension "d173" = 5.08
  dimension "d174" = 5.08
  dimension "d175" = 5.08
  dimension "d176" = 5.08
extrude "Extrusion16" add sketch "Sketch13" along normal blind 1.905
fillet "Fillet2" radius 3.175 4 edges at (-29.9244, 33.655, -81.0439) (-51.5144, 33.655, -81.0439) (-29.9244, 33.655, -33.7333) (-51.5144, 33.655, -33.7333)
sketch "Sketch14" plane through (-46.4344, 35.56, -36.2733) normal (0, 0, -1) x (-1, 0, 0)
  line L0 (1.905, 0) -> (0, 0) projected
  line L1 (0, 0) -> (0, -1.905) projected
  line L2 (1.905, 0) -> (0, 0)
  line L3 (0, 0) -> (0, -0.9525)
  line L4 (0, -0.9525) -> (1.905, -0.9525)
  line L5 (1.905, -0.9525) -> (1.905, 0)
  line L6 (-11.43, 0) -> (-13.335, 0) projected
  line L7 (-13.335, 0) -> (-11.43, 0)
  line L8 (-11.43, 0) -> (-11.43, -0.9525)
  line L9 (-11.43, -0.9525) -> (-13.335, -0.9525)
  line L10 (-13.335, -0.9525) -> (-13.335, 0)
  point P0 (-46.4344, -35.56)
  point P1 (-11.43, 0)
  dimension "d180" = 0.9525
  dimension "d181" = 0.9525
extrude "Extrusion17" cut sketch "Sketch14" along normal blind 50.8 and the other way blind 12.7
sketch "Sketch15" plane through (-172.72, 0, -109.22) normal (0, 0, 1) x (1, 0, 0)
  line L0 (-40.4484, 62.594) -> (200.0491, 62.594)
  line L1 (200.0491, 62.594) -> (200.0491, -43.715)
  line L2 (200.0491, -43.715) -> (-40.4484, -43.715)
  line L3 (-40.4484, -43.715) -> (-40.4484, 62.594)
  point P0 (172.72, 0)
extrude "Extrusion18" cut sketch "Sketch15" along normal blind 127
sketch "Sketch16" plane through (-177.8, 0, -109.22) normal (0, 0, 1) x (1, 0, 0)
  line L0 (-8.794, 45.1558) -> (94.6429, 45.1558)
  line L1 (94.6429, 45.1558) -> (94.6429, -7.2306)
  line L2 (94.6429, -7.2306) -> (-8.794, -7.2306)
  line L3 (-8.794, -7.2306) -> (-8.794, 45.1558)
  line L4 (130.7122, 46.8734) -> (185.1979, 46.8734)
  line L5 (185.1979, 46.8734) -> (185.1979, -7.2306)
  line L6 (185.1979, -7.2306) -> (130.7122, -7.2306)
  line L7 (130.7122, -7.2306) -> (130.7122, 46.8734)
  line L8 (94.6429, 45.1558) -> (130.7122, 45.1558)
  line L9 (130.7122, 45.1558) -> (130.7122, 27.5983)
  line L10 (130.7122, 27.5983) -> (94.6429, 27.5983)
  line L11 (94.6429, 27.5983) -> (94.6429, 45.1558)
  line L12 (94.6429, 10.8041) -> (130.7122, 10.8041)
  line L13 (130.7122, 10.8041) -> (130.7122, -7.2306)
  line L14 (130.7122, -7.2306) -> (94.6429, -7.2306)
  line L15 (94.6429, -7.2306) -> (94.6429, 10.8041)
  line L16 (122.5059, 27.5983) -> (130.7122, 27.5983)
  line L17 (130.7122, 27.5983) -> (130.7122, 10.8041)
  line L18 (130.7122, 10.8041) -> (122.5059, 10.8041)
  line L19 (122.5059, 10.8041) -> (122.5059, 27.5983)
  point P0 (177.8, 0)
  point P1 (94.6429, -7.2306)
  point P2 (94.6429, 27.5983)
extrude "Extrusion19" cut sketch "Sketch16" against normal blind 127 contours L0 L1 L2 L3 | L8 L7 L10 L1 | L7 L4 L5 L6 | L1 L12 L7 L14 | L10 L7 L12 L19
sketch "Sketch17" plane through (-83.1571, 27.5983, -109.22) normal (0, 0, 1) x (1, 0, 0)
  line L0 (3.9324, -1.5077) -> (22.3973, -1.5077)
  line L1 (22.3973, -1.5077) -> (22.3973, -14.3079)
  line L2 (22.3973, -14.3079) -> (3.9324, -14.3079)
  line L3 (3.9324, -14.3079) -> (3.9324, -1.5077)
  line L4 (-3.6932, 2.6863) -> (32.5829, 2.6863)
  line L5 (32.5829, 2.6863) -> (32.5829, -19.7548)
  line L6 (32.5829, -19.7548) -> (-3.6932, -19.7548)
  line L7 (-3.6932, -19.7548) -> (-3.6932, 2.6863)
  point P0 (83.1571, -27.5983)
extrude "Extrusion20" cut sketch "Sketch17" against normal blind 25.4
properties part number "Audio_jack_slot"
